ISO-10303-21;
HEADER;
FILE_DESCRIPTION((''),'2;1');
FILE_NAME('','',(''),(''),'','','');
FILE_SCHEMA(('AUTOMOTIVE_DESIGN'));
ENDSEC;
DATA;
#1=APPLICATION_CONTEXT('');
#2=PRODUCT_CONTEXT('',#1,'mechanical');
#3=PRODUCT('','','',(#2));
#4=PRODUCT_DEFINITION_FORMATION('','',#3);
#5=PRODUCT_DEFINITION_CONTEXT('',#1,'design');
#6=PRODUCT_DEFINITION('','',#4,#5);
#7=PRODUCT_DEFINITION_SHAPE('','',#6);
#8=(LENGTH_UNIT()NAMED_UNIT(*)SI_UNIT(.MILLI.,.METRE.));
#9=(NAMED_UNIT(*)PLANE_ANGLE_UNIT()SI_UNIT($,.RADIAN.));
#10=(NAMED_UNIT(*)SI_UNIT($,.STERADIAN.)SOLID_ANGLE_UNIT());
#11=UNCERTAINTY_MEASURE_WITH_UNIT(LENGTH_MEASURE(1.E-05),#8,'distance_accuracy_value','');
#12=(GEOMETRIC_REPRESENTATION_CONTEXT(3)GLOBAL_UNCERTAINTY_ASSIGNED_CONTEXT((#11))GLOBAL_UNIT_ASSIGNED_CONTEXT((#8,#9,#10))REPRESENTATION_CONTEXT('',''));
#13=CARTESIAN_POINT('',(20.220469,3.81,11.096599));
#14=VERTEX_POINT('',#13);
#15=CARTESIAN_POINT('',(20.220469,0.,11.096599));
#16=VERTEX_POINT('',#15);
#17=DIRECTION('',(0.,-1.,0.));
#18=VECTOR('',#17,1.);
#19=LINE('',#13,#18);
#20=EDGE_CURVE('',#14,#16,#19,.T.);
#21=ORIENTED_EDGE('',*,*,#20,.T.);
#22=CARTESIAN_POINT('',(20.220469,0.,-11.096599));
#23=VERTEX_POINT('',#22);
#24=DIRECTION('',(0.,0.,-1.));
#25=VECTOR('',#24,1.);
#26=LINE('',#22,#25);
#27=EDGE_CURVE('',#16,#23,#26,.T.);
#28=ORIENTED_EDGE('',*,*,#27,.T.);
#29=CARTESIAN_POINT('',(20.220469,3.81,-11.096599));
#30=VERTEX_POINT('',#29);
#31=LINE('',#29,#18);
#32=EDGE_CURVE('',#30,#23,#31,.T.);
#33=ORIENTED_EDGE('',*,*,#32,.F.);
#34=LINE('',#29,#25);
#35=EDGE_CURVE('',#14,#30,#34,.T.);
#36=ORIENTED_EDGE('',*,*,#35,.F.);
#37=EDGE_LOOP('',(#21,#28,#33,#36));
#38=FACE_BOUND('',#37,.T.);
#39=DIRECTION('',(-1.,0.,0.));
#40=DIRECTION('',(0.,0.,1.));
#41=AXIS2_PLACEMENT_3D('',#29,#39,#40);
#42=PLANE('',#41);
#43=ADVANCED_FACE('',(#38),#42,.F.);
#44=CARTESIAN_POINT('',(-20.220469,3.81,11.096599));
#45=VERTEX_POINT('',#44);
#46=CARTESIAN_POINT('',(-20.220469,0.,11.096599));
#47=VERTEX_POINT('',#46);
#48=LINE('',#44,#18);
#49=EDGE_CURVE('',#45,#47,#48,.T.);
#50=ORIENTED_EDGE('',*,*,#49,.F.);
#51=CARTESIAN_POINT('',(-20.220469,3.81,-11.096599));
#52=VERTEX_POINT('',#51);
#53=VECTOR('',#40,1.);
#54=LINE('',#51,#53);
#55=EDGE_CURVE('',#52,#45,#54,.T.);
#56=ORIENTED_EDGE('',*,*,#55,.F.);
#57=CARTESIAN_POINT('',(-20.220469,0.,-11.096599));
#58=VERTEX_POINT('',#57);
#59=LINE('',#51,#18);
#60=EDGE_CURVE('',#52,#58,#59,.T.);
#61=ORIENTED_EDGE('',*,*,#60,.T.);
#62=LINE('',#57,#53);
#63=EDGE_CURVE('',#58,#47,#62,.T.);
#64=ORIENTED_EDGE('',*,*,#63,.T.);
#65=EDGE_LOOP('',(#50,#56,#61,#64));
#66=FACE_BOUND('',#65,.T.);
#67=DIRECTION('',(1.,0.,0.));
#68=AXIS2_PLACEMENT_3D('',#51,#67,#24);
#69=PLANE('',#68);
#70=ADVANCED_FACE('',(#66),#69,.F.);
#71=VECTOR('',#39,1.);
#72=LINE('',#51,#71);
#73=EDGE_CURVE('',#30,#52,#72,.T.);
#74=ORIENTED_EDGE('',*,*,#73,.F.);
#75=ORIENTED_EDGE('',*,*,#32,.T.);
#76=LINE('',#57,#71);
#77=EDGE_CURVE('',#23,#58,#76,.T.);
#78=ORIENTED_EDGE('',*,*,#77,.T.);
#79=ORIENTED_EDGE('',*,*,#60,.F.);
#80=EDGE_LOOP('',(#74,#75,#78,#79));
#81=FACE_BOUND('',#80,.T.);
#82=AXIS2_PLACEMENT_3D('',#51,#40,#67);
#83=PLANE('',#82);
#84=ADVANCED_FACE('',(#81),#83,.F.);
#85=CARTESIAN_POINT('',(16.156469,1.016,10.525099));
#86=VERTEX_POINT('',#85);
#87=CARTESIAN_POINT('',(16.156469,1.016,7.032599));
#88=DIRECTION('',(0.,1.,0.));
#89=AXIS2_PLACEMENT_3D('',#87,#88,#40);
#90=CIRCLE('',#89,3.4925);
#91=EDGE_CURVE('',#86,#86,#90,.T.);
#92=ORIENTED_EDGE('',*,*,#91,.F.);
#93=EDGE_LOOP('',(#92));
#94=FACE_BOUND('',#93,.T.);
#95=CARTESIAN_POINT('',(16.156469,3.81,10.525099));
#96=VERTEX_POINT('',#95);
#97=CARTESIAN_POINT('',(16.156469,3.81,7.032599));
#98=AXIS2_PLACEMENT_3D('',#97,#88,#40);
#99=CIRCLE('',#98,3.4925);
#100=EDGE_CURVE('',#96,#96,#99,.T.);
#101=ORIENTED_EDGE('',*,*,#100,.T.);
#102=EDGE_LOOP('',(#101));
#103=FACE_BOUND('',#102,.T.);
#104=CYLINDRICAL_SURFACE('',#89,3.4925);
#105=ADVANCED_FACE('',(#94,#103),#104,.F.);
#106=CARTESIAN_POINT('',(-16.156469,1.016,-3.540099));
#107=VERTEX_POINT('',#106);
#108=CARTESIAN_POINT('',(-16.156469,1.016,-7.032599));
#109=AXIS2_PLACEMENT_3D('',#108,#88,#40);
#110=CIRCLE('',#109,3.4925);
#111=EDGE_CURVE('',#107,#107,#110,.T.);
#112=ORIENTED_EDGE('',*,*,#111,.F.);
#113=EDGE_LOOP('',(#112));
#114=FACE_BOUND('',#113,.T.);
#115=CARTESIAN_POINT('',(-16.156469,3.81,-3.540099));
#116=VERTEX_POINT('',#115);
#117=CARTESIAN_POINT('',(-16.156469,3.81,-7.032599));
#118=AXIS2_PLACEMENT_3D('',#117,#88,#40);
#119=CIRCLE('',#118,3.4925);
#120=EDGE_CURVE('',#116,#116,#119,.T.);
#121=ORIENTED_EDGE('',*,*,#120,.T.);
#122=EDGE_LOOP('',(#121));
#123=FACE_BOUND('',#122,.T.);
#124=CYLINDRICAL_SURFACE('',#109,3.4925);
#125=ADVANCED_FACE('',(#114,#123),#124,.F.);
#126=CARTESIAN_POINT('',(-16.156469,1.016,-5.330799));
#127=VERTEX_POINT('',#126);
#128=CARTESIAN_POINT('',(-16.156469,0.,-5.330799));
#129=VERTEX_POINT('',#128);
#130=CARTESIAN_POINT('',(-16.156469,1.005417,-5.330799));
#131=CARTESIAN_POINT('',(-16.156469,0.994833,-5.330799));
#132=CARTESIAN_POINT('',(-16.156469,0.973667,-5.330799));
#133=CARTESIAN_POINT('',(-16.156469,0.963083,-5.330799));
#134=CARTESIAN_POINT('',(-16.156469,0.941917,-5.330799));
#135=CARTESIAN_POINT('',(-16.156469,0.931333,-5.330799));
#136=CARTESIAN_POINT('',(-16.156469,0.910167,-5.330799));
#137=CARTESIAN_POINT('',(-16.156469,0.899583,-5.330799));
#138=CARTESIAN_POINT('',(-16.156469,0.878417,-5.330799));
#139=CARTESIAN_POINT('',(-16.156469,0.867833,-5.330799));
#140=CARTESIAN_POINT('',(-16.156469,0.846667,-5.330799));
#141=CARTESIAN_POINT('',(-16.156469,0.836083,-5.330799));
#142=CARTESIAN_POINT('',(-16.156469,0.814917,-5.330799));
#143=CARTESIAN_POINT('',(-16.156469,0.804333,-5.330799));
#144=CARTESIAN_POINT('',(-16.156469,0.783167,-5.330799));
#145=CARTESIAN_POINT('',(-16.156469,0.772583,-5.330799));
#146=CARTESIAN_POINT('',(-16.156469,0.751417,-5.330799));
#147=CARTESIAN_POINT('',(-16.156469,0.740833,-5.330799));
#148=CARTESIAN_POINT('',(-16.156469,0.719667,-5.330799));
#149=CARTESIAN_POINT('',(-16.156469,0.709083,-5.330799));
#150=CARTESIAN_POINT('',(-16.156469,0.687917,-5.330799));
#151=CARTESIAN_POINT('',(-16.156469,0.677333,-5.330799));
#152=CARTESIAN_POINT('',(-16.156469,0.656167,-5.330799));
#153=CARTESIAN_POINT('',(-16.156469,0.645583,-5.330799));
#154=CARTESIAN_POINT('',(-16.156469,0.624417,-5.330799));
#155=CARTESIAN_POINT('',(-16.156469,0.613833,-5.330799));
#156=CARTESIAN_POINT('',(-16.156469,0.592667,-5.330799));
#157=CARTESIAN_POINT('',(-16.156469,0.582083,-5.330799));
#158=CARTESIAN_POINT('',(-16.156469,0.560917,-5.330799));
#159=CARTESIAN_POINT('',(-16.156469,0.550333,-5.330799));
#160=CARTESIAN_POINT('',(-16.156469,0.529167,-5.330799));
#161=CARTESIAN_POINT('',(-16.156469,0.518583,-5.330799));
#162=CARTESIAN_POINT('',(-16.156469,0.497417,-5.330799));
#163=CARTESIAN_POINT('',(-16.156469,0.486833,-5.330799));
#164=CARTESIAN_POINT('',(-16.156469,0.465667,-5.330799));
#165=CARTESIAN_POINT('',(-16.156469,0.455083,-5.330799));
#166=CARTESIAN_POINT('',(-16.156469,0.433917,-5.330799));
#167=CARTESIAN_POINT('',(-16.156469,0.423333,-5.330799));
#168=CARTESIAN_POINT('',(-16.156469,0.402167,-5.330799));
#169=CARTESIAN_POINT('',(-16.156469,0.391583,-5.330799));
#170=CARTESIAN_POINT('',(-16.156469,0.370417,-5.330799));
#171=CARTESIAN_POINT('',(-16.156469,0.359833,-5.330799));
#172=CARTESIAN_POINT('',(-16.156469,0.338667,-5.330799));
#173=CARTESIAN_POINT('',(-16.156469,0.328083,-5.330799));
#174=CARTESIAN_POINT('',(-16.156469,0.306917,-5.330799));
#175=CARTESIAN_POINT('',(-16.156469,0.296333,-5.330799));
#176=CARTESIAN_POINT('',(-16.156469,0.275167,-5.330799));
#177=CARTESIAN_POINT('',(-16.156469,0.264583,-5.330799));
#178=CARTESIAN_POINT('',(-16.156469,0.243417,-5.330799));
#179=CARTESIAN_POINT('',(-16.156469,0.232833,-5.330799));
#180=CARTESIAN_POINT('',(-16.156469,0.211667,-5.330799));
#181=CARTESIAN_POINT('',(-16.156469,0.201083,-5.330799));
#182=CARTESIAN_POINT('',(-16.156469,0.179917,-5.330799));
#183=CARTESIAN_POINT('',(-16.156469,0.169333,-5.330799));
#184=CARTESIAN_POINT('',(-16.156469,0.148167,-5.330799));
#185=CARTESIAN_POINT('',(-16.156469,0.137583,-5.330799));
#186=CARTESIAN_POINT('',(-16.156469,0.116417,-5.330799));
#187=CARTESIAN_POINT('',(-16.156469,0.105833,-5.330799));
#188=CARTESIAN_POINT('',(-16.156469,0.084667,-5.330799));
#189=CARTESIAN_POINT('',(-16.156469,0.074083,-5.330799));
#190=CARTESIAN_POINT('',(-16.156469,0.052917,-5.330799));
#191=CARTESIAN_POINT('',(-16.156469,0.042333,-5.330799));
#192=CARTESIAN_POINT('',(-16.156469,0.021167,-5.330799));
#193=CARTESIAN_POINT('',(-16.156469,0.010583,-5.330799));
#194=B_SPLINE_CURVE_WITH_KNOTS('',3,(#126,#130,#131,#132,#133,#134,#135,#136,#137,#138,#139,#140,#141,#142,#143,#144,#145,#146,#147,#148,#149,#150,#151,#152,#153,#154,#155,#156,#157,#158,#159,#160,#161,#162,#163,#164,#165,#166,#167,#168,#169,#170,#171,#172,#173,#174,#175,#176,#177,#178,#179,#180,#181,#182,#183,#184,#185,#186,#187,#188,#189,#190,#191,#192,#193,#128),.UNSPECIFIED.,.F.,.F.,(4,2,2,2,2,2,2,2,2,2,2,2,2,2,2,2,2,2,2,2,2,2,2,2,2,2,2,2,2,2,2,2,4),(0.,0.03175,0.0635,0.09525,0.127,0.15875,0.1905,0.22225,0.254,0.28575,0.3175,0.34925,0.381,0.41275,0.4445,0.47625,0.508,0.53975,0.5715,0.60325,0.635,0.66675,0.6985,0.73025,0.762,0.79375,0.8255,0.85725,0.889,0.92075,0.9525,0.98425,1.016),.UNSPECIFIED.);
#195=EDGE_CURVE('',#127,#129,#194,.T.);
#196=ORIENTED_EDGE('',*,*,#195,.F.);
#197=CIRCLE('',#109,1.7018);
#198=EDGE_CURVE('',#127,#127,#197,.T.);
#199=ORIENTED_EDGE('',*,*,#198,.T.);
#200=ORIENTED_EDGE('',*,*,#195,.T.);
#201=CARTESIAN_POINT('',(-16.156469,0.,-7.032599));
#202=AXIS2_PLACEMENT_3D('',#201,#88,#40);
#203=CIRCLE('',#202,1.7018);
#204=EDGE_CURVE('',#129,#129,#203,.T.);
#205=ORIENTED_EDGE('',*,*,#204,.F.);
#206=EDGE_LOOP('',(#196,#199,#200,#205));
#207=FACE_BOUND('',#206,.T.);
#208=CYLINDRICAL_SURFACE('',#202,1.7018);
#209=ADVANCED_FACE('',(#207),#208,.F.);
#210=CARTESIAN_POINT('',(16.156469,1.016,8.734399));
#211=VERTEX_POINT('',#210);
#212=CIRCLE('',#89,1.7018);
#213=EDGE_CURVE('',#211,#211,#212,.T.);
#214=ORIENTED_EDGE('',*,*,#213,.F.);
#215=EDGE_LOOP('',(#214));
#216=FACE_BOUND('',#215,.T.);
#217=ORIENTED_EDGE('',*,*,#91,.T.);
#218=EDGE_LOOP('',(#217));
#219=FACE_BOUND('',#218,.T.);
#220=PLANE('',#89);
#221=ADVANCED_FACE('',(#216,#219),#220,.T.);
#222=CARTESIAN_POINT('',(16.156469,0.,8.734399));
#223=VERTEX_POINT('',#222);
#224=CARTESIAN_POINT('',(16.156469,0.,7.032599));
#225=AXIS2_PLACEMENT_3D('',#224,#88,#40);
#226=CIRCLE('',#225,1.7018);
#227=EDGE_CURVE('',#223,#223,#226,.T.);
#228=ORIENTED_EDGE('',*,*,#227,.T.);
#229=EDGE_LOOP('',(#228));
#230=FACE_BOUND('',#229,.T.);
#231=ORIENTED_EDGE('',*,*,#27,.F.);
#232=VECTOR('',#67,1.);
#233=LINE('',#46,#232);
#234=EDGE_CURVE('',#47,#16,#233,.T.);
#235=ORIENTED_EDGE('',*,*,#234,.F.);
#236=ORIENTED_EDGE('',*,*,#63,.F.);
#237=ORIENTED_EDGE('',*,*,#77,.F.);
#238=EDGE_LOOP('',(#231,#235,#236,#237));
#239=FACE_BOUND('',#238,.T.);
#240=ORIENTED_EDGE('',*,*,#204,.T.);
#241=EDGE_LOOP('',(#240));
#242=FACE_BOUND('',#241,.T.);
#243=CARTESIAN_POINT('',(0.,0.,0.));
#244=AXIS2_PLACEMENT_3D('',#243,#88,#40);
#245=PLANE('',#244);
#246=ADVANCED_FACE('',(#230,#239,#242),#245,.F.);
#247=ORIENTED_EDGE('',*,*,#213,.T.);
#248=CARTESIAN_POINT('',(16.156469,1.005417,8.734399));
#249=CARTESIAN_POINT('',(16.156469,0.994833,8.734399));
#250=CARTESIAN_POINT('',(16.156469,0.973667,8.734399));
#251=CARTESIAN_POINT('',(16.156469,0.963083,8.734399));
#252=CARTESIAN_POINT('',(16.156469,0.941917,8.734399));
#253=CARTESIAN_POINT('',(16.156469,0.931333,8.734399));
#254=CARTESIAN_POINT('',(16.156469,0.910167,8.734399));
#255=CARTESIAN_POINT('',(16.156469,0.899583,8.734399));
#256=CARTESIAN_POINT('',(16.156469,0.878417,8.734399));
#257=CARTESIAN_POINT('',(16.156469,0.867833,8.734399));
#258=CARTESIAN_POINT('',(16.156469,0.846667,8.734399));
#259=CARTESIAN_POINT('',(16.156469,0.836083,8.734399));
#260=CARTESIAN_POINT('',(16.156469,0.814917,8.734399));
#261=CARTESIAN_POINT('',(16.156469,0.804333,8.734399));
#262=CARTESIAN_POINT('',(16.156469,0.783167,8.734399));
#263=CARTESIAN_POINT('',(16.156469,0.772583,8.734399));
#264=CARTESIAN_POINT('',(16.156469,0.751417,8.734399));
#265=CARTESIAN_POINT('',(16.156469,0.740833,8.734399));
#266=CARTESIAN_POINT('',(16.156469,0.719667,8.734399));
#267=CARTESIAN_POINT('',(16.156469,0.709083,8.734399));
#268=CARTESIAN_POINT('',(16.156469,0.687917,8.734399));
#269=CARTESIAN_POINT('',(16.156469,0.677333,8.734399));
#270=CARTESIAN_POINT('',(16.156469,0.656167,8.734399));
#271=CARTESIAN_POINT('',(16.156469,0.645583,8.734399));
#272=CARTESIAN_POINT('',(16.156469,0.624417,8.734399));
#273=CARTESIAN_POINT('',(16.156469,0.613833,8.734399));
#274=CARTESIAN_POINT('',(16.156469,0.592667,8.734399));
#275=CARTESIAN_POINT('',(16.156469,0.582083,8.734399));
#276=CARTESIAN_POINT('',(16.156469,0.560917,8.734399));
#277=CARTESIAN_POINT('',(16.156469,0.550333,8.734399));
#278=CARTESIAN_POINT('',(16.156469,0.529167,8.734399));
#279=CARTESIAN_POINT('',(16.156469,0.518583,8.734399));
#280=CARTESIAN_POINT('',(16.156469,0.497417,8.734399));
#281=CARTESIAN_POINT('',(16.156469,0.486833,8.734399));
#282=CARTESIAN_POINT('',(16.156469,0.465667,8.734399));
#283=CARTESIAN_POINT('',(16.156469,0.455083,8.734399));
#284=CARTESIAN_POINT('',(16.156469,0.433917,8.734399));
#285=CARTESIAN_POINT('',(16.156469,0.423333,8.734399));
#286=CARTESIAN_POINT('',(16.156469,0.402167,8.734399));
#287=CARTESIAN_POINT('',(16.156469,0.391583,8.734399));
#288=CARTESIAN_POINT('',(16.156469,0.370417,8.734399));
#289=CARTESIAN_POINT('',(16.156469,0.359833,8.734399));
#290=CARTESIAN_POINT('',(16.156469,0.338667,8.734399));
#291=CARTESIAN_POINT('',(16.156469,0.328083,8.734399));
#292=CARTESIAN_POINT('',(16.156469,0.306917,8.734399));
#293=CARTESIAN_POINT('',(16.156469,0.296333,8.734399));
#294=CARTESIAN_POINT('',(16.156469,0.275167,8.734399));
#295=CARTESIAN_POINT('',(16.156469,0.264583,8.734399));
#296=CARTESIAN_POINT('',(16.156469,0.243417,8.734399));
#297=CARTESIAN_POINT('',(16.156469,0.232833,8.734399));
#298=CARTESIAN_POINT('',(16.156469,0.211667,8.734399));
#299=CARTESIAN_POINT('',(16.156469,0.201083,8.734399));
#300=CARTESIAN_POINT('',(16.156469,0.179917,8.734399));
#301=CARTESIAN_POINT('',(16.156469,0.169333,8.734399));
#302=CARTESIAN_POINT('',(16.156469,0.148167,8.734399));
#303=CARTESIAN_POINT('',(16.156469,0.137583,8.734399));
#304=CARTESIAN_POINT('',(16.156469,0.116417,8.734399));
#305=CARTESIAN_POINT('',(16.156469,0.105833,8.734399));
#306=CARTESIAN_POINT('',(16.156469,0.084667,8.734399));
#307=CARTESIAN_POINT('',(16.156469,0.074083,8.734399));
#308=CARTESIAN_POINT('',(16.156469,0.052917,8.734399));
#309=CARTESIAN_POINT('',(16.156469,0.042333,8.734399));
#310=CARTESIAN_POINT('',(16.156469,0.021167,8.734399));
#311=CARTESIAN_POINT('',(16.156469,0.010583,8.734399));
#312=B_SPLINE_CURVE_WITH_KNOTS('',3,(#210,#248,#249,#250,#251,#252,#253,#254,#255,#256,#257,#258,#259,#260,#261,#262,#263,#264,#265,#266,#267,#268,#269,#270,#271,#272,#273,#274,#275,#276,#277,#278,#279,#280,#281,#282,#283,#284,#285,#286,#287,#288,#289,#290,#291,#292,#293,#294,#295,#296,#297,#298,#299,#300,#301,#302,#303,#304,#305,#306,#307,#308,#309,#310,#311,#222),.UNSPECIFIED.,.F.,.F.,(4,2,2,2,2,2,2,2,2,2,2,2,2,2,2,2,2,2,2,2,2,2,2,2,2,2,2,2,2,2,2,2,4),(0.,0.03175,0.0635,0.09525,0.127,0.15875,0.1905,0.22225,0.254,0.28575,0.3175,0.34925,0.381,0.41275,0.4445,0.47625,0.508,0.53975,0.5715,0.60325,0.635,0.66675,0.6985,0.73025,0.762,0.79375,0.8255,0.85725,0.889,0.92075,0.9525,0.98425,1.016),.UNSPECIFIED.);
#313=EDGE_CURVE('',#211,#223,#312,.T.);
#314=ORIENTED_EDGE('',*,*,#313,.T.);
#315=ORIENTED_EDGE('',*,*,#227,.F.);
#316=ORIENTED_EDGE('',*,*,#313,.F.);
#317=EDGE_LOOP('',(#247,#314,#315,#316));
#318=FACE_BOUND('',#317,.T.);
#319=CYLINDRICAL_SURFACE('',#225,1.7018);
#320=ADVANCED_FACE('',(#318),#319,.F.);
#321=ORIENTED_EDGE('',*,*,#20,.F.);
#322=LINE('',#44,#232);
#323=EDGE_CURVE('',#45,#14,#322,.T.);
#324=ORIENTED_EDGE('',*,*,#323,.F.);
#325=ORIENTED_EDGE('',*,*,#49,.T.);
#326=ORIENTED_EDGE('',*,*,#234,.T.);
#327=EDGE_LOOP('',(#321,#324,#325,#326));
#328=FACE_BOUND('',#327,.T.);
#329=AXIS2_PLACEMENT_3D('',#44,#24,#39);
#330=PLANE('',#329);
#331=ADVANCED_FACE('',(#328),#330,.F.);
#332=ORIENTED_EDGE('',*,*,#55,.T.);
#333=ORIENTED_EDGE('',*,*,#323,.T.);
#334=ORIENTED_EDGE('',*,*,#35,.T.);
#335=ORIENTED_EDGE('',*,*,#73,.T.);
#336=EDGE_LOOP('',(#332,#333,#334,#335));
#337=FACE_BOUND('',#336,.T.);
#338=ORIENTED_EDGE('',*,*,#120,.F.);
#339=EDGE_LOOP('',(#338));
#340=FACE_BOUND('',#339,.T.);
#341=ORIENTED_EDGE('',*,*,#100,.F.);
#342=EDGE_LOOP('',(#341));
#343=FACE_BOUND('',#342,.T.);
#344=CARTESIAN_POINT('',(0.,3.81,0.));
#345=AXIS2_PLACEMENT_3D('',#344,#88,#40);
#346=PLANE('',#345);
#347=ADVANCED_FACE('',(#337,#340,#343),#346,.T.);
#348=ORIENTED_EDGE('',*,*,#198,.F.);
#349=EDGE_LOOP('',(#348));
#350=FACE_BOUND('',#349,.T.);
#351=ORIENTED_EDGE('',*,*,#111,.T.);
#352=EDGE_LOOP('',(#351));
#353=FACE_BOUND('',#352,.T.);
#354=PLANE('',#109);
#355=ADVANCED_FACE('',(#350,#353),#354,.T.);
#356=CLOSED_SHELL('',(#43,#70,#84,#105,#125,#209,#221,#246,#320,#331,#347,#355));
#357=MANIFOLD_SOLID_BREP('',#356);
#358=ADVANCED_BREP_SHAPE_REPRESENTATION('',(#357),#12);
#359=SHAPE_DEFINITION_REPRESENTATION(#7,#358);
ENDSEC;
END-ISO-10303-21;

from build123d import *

# Parameters (mm, degrees)
SKETCH1_W           = 40.44093781
SKETCH1_H           = 22.193197578
BOSS_EXTRUDE1_DEPTH = 3.81
SKETCH3_R           = 3.4925
CUT_EXTRUDE3_DEPTH  = 2.794
SKETCH3_4_R         = 1.7018
CUT_EXTRUDE4_DEPTH  = 24.377723743


with BuildPart() as part:
    # Sketch1 → Boss-Extrude1 (new body)
    with BuildSketch(Plane(origin=(0, 0, 0), x_dir=(1, 0, 0), z_dir=(0, 1, 0))):
        Rectangle(SKETCH1_W, SKETCH1_H)
    extrude(amount=BOSS_EXTRUDE1_DEPTH)

    # Sketch3 → Cut-Extrude3 (cut)
    with BuildSketch(Plane(origin=(0, 3.81, 0), x_dir=(1, 0, 0), z_dir=(0, 1, 0))):
        with Locations((-16.156468905, 7.032598789)):
            Circle(SKETCH3_R)
        with Locations((16.156468905, -7.032598789)):
            Circle(SKETCH3_R)
    extrude(amount=-CUT_EXTRUDE3_DEPTH, mode=Mode.SUBTRACT)

    # Sketch3<4> → Cut-Extrude4 (cut, through all)
    with BuildSketch(Plane(origin=(0, 3.81, 0), x_dir=(1, 0, 0), z_dir=(0, 1, 0))):
        with Locations((-16.156468905, 7.032598789)):
            Circle(SKETCH3_4_R)
        with Locations((16.156468905, -7.032598789)):
            Circle(SKETCH3_4_R)
    extrude(amount=-CUT_EXTRUDE4_DEPTH, mode=Mode.SUBTRACT)


solid = part.part
